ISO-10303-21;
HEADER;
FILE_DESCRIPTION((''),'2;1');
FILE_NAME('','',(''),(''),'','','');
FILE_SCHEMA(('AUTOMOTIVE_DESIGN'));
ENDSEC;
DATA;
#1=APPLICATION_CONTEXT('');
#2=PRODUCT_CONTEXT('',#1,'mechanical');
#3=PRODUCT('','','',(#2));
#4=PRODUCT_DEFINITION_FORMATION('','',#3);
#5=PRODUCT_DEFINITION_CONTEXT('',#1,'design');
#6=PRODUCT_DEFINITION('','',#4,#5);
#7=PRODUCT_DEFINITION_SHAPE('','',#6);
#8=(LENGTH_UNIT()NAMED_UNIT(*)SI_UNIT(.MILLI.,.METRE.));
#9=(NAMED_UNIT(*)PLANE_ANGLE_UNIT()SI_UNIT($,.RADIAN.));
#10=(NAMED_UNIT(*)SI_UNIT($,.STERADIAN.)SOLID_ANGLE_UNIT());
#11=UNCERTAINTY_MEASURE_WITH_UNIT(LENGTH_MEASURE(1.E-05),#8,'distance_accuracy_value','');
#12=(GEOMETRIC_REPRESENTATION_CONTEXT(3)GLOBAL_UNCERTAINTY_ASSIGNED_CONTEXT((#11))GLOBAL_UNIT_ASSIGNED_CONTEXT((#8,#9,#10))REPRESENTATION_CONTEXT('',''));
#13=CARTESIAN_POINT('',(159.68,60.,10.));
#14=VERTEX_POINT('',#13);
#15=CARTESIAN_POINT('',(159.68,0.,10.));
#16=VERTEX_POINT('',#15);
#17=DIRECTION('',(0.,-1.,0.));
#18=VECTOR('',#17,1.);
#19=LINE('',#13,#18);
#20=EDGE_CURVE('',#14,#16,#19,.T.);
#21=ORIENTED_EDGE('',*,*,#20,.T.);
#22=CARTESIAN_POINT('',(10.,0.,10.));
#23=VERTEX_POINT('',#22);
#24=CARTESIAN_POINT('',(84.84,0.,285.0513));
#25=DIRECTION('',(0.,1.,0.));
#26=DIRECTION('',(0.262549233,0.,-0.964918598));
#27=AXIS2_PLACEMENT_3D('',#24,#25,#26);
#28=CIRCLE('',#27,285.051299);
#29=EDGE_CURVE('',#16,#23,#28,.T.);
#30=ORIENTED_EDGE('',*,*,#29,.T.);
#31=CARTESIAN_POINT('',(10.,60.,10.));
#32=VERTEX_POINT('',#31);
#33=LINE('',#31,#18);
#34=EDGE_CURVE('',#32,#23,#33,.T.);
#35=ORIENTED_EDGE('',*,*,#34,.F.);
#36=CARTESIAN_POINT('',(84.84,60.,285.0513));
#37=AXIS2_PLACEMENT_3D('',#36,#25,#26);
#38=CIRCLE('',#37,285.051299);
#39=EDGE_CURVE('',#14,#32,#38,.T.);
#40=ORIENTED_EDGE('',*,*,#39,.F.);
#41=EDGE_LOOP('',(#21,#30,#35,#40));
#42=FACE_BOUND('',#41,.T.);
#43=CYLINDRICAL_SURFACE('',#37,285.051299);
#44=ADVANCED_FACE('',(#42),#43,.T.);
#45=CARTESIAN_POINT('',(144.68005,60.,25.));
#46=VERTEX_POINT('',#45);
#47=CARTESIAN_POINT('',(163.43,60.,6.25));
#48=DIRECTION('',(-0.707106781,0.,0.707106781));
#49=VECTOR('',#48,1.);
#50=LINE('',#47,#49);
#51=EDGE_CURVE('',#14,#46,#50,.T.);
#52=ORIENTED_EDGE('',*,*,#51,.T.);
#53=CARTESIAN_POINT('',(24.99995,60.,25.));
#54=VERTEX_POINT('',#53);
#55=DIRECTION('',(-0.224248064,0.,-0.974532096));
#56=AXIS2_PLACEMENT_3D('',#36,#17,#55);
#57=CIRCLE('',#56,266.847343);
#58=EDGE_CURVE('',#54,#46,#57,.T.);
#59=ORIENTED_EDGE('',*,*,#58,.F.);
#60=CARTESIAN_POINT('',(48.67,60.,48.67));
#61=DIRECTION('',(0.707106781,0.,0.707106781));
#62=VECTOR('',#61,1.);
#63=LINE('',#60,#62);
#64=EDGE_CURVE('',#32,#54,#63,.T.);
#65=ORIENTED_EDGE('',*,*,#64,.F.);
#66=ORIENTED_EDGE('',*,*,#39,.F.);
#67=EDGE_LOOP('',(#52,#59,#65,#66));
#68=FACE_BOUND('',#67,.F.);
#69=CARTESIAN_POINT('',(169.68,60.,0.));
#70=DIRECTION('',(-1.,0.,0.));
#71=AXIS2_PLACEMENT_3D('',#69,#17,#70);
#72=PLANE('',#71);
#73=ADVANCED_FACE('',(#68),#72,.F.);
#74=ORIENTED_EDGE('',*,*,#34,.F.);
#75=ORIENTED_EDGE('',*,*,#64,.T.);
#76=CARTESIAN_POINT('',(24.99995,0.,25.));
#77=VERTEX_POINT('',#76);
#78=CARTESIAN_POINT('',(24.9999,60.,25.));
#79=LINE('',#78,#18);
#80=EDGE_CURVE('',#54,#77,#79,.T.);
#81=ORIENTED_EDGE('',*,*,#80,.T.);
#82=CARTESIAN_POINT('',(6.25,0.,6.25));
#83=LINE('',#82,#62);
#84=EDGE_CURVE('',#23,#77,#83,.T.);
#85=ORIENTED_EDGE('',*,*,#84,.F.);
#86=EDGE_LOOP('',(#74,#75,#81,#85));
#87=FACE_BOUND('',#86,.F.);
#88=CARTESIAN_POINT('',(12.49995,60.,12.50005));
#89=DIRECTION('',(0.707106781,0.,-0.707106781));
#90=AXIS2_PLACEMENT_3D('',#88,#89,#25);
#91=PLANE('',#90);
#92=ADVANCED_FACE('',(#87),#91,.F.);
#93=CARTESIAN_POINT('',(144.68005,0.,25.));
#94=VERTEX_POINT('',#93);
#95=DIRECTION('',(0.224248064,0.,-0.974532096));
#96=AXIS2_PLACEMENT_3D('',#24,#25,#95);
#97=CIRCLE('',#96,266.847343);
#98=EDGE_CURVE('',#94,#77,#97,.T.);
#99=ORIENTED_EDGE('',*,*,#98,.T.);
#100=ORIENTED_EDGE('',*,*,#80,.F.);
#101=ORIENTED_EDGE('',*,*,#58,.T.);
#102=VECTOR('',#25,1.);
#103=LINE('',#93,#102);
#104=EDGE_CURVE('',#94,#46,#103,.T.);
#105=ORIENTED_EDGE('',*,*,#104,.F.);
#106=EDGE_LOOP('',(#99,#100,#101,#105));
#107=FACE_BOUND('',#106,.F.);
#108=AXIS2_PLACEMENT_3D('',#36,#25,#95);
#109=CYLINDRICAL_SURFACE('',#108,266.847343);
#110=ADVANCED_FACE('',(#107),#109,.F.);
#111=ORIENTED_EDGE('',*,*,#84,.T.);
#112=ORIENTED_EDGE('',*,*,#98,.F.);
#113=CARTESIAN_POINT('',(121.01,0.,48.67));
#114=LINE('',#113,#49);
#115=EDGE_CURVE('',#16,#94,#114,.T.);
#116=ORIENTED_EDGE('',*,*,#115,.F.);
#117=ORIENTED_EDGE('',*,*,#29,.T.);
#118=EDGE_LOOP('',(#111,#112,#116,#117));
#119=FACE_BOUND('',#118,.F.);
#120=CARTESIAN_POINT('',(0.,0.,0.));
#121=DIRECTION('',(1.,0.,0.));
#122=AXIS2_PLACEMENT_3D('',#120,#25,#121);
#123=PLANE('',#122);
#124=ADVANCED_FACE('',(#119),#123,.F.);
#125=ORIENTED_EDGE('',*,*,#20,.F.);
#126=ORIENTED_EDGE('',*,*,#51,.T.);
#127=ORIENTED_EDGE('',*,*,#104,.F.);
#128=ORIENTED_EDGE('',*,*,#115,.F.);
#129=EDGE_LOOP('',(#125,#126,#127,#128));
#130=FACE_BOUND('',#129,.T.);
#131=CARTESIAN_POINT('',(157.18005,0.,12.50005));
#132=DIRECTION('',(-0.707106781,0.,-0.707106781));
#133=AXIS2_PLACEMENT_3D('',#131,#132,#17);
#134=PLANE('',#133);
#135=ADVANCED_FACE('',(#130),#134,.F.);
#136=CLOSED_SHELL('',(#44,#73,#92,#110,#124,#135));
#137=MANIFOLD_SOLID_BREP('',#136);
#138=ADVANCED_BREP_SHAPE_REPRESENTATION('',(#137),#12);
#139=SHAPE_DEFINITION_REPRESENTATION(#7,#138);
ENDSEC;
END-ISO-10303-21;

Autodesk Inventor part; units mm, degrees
ref_plane "YZ Plane" through (0, 0, 0) normal (1, 0, 0) x (0, 1, 0)
ref_plane "XZ Plane" through (0, 0, 0) normal (0, 1, 0) x (-1, 0, 0)
ref_plane "XY Plane" through (0, 0, 0) normal (0, 0, 1) x (1, 0, 0)
sketch "Эскиз1" plane through (0, 0, 0) normal (0, 0, 1) x (1, 0, 0)
  line L0 (0, 0) -> (169.68, 0)
  line L1 (169.68, 0) -> (169.68, 60)
  line L2 (169.68, 60) -> (0, 60)
  line L3 (0, 60) -> (0, 0)
  dimension "d0" = 169.68
  dimension "d1" = 60
extrude "Выдавливание1" add sketch "Эскиз1" along normal blind 25
chamfer "Фаска1" distance 25 angle 45 2 edges at (0, 30, 25) (169.68, 30, 25)
sketch "Эскиз2" plane through (0, 60, 0) normal (0, 1, 0) x (1, 0, 0)
  line L0 (0, 0) -> (169.68, 0) projected
  line L1 (84.84, 0) -> (84.84, -96.7295)
  line L2 (169.68, 0) -> (0, 0) projected
  line L3 (25, -25) -> (144.68, -25) projected
  line L4 (0, 0) -> (25, -25) projected
  arc A0 (144.68, -25) -> (25, -25) centre (84.84, -285.0513) ccw
  line L5 (144.68, -25) -> (169.68, 0) projected
  arc A1 (159.68, -10) -> (10, -10) centre (84.84, -285.0513) ccw
  point P0 (169.68, -12)
  point P1 (0, -25)
  point P2 (169.68, -25)
  dimension "d7" = 10
extrude "Выдавливание2" cut sketch "Эскиз2" against normal blind 60 contours L0 A1 L4 | L0 L5 A1 | A0 L3 L1 | L1 L3 A0
properties part number "Long" material "Красное дерево"
